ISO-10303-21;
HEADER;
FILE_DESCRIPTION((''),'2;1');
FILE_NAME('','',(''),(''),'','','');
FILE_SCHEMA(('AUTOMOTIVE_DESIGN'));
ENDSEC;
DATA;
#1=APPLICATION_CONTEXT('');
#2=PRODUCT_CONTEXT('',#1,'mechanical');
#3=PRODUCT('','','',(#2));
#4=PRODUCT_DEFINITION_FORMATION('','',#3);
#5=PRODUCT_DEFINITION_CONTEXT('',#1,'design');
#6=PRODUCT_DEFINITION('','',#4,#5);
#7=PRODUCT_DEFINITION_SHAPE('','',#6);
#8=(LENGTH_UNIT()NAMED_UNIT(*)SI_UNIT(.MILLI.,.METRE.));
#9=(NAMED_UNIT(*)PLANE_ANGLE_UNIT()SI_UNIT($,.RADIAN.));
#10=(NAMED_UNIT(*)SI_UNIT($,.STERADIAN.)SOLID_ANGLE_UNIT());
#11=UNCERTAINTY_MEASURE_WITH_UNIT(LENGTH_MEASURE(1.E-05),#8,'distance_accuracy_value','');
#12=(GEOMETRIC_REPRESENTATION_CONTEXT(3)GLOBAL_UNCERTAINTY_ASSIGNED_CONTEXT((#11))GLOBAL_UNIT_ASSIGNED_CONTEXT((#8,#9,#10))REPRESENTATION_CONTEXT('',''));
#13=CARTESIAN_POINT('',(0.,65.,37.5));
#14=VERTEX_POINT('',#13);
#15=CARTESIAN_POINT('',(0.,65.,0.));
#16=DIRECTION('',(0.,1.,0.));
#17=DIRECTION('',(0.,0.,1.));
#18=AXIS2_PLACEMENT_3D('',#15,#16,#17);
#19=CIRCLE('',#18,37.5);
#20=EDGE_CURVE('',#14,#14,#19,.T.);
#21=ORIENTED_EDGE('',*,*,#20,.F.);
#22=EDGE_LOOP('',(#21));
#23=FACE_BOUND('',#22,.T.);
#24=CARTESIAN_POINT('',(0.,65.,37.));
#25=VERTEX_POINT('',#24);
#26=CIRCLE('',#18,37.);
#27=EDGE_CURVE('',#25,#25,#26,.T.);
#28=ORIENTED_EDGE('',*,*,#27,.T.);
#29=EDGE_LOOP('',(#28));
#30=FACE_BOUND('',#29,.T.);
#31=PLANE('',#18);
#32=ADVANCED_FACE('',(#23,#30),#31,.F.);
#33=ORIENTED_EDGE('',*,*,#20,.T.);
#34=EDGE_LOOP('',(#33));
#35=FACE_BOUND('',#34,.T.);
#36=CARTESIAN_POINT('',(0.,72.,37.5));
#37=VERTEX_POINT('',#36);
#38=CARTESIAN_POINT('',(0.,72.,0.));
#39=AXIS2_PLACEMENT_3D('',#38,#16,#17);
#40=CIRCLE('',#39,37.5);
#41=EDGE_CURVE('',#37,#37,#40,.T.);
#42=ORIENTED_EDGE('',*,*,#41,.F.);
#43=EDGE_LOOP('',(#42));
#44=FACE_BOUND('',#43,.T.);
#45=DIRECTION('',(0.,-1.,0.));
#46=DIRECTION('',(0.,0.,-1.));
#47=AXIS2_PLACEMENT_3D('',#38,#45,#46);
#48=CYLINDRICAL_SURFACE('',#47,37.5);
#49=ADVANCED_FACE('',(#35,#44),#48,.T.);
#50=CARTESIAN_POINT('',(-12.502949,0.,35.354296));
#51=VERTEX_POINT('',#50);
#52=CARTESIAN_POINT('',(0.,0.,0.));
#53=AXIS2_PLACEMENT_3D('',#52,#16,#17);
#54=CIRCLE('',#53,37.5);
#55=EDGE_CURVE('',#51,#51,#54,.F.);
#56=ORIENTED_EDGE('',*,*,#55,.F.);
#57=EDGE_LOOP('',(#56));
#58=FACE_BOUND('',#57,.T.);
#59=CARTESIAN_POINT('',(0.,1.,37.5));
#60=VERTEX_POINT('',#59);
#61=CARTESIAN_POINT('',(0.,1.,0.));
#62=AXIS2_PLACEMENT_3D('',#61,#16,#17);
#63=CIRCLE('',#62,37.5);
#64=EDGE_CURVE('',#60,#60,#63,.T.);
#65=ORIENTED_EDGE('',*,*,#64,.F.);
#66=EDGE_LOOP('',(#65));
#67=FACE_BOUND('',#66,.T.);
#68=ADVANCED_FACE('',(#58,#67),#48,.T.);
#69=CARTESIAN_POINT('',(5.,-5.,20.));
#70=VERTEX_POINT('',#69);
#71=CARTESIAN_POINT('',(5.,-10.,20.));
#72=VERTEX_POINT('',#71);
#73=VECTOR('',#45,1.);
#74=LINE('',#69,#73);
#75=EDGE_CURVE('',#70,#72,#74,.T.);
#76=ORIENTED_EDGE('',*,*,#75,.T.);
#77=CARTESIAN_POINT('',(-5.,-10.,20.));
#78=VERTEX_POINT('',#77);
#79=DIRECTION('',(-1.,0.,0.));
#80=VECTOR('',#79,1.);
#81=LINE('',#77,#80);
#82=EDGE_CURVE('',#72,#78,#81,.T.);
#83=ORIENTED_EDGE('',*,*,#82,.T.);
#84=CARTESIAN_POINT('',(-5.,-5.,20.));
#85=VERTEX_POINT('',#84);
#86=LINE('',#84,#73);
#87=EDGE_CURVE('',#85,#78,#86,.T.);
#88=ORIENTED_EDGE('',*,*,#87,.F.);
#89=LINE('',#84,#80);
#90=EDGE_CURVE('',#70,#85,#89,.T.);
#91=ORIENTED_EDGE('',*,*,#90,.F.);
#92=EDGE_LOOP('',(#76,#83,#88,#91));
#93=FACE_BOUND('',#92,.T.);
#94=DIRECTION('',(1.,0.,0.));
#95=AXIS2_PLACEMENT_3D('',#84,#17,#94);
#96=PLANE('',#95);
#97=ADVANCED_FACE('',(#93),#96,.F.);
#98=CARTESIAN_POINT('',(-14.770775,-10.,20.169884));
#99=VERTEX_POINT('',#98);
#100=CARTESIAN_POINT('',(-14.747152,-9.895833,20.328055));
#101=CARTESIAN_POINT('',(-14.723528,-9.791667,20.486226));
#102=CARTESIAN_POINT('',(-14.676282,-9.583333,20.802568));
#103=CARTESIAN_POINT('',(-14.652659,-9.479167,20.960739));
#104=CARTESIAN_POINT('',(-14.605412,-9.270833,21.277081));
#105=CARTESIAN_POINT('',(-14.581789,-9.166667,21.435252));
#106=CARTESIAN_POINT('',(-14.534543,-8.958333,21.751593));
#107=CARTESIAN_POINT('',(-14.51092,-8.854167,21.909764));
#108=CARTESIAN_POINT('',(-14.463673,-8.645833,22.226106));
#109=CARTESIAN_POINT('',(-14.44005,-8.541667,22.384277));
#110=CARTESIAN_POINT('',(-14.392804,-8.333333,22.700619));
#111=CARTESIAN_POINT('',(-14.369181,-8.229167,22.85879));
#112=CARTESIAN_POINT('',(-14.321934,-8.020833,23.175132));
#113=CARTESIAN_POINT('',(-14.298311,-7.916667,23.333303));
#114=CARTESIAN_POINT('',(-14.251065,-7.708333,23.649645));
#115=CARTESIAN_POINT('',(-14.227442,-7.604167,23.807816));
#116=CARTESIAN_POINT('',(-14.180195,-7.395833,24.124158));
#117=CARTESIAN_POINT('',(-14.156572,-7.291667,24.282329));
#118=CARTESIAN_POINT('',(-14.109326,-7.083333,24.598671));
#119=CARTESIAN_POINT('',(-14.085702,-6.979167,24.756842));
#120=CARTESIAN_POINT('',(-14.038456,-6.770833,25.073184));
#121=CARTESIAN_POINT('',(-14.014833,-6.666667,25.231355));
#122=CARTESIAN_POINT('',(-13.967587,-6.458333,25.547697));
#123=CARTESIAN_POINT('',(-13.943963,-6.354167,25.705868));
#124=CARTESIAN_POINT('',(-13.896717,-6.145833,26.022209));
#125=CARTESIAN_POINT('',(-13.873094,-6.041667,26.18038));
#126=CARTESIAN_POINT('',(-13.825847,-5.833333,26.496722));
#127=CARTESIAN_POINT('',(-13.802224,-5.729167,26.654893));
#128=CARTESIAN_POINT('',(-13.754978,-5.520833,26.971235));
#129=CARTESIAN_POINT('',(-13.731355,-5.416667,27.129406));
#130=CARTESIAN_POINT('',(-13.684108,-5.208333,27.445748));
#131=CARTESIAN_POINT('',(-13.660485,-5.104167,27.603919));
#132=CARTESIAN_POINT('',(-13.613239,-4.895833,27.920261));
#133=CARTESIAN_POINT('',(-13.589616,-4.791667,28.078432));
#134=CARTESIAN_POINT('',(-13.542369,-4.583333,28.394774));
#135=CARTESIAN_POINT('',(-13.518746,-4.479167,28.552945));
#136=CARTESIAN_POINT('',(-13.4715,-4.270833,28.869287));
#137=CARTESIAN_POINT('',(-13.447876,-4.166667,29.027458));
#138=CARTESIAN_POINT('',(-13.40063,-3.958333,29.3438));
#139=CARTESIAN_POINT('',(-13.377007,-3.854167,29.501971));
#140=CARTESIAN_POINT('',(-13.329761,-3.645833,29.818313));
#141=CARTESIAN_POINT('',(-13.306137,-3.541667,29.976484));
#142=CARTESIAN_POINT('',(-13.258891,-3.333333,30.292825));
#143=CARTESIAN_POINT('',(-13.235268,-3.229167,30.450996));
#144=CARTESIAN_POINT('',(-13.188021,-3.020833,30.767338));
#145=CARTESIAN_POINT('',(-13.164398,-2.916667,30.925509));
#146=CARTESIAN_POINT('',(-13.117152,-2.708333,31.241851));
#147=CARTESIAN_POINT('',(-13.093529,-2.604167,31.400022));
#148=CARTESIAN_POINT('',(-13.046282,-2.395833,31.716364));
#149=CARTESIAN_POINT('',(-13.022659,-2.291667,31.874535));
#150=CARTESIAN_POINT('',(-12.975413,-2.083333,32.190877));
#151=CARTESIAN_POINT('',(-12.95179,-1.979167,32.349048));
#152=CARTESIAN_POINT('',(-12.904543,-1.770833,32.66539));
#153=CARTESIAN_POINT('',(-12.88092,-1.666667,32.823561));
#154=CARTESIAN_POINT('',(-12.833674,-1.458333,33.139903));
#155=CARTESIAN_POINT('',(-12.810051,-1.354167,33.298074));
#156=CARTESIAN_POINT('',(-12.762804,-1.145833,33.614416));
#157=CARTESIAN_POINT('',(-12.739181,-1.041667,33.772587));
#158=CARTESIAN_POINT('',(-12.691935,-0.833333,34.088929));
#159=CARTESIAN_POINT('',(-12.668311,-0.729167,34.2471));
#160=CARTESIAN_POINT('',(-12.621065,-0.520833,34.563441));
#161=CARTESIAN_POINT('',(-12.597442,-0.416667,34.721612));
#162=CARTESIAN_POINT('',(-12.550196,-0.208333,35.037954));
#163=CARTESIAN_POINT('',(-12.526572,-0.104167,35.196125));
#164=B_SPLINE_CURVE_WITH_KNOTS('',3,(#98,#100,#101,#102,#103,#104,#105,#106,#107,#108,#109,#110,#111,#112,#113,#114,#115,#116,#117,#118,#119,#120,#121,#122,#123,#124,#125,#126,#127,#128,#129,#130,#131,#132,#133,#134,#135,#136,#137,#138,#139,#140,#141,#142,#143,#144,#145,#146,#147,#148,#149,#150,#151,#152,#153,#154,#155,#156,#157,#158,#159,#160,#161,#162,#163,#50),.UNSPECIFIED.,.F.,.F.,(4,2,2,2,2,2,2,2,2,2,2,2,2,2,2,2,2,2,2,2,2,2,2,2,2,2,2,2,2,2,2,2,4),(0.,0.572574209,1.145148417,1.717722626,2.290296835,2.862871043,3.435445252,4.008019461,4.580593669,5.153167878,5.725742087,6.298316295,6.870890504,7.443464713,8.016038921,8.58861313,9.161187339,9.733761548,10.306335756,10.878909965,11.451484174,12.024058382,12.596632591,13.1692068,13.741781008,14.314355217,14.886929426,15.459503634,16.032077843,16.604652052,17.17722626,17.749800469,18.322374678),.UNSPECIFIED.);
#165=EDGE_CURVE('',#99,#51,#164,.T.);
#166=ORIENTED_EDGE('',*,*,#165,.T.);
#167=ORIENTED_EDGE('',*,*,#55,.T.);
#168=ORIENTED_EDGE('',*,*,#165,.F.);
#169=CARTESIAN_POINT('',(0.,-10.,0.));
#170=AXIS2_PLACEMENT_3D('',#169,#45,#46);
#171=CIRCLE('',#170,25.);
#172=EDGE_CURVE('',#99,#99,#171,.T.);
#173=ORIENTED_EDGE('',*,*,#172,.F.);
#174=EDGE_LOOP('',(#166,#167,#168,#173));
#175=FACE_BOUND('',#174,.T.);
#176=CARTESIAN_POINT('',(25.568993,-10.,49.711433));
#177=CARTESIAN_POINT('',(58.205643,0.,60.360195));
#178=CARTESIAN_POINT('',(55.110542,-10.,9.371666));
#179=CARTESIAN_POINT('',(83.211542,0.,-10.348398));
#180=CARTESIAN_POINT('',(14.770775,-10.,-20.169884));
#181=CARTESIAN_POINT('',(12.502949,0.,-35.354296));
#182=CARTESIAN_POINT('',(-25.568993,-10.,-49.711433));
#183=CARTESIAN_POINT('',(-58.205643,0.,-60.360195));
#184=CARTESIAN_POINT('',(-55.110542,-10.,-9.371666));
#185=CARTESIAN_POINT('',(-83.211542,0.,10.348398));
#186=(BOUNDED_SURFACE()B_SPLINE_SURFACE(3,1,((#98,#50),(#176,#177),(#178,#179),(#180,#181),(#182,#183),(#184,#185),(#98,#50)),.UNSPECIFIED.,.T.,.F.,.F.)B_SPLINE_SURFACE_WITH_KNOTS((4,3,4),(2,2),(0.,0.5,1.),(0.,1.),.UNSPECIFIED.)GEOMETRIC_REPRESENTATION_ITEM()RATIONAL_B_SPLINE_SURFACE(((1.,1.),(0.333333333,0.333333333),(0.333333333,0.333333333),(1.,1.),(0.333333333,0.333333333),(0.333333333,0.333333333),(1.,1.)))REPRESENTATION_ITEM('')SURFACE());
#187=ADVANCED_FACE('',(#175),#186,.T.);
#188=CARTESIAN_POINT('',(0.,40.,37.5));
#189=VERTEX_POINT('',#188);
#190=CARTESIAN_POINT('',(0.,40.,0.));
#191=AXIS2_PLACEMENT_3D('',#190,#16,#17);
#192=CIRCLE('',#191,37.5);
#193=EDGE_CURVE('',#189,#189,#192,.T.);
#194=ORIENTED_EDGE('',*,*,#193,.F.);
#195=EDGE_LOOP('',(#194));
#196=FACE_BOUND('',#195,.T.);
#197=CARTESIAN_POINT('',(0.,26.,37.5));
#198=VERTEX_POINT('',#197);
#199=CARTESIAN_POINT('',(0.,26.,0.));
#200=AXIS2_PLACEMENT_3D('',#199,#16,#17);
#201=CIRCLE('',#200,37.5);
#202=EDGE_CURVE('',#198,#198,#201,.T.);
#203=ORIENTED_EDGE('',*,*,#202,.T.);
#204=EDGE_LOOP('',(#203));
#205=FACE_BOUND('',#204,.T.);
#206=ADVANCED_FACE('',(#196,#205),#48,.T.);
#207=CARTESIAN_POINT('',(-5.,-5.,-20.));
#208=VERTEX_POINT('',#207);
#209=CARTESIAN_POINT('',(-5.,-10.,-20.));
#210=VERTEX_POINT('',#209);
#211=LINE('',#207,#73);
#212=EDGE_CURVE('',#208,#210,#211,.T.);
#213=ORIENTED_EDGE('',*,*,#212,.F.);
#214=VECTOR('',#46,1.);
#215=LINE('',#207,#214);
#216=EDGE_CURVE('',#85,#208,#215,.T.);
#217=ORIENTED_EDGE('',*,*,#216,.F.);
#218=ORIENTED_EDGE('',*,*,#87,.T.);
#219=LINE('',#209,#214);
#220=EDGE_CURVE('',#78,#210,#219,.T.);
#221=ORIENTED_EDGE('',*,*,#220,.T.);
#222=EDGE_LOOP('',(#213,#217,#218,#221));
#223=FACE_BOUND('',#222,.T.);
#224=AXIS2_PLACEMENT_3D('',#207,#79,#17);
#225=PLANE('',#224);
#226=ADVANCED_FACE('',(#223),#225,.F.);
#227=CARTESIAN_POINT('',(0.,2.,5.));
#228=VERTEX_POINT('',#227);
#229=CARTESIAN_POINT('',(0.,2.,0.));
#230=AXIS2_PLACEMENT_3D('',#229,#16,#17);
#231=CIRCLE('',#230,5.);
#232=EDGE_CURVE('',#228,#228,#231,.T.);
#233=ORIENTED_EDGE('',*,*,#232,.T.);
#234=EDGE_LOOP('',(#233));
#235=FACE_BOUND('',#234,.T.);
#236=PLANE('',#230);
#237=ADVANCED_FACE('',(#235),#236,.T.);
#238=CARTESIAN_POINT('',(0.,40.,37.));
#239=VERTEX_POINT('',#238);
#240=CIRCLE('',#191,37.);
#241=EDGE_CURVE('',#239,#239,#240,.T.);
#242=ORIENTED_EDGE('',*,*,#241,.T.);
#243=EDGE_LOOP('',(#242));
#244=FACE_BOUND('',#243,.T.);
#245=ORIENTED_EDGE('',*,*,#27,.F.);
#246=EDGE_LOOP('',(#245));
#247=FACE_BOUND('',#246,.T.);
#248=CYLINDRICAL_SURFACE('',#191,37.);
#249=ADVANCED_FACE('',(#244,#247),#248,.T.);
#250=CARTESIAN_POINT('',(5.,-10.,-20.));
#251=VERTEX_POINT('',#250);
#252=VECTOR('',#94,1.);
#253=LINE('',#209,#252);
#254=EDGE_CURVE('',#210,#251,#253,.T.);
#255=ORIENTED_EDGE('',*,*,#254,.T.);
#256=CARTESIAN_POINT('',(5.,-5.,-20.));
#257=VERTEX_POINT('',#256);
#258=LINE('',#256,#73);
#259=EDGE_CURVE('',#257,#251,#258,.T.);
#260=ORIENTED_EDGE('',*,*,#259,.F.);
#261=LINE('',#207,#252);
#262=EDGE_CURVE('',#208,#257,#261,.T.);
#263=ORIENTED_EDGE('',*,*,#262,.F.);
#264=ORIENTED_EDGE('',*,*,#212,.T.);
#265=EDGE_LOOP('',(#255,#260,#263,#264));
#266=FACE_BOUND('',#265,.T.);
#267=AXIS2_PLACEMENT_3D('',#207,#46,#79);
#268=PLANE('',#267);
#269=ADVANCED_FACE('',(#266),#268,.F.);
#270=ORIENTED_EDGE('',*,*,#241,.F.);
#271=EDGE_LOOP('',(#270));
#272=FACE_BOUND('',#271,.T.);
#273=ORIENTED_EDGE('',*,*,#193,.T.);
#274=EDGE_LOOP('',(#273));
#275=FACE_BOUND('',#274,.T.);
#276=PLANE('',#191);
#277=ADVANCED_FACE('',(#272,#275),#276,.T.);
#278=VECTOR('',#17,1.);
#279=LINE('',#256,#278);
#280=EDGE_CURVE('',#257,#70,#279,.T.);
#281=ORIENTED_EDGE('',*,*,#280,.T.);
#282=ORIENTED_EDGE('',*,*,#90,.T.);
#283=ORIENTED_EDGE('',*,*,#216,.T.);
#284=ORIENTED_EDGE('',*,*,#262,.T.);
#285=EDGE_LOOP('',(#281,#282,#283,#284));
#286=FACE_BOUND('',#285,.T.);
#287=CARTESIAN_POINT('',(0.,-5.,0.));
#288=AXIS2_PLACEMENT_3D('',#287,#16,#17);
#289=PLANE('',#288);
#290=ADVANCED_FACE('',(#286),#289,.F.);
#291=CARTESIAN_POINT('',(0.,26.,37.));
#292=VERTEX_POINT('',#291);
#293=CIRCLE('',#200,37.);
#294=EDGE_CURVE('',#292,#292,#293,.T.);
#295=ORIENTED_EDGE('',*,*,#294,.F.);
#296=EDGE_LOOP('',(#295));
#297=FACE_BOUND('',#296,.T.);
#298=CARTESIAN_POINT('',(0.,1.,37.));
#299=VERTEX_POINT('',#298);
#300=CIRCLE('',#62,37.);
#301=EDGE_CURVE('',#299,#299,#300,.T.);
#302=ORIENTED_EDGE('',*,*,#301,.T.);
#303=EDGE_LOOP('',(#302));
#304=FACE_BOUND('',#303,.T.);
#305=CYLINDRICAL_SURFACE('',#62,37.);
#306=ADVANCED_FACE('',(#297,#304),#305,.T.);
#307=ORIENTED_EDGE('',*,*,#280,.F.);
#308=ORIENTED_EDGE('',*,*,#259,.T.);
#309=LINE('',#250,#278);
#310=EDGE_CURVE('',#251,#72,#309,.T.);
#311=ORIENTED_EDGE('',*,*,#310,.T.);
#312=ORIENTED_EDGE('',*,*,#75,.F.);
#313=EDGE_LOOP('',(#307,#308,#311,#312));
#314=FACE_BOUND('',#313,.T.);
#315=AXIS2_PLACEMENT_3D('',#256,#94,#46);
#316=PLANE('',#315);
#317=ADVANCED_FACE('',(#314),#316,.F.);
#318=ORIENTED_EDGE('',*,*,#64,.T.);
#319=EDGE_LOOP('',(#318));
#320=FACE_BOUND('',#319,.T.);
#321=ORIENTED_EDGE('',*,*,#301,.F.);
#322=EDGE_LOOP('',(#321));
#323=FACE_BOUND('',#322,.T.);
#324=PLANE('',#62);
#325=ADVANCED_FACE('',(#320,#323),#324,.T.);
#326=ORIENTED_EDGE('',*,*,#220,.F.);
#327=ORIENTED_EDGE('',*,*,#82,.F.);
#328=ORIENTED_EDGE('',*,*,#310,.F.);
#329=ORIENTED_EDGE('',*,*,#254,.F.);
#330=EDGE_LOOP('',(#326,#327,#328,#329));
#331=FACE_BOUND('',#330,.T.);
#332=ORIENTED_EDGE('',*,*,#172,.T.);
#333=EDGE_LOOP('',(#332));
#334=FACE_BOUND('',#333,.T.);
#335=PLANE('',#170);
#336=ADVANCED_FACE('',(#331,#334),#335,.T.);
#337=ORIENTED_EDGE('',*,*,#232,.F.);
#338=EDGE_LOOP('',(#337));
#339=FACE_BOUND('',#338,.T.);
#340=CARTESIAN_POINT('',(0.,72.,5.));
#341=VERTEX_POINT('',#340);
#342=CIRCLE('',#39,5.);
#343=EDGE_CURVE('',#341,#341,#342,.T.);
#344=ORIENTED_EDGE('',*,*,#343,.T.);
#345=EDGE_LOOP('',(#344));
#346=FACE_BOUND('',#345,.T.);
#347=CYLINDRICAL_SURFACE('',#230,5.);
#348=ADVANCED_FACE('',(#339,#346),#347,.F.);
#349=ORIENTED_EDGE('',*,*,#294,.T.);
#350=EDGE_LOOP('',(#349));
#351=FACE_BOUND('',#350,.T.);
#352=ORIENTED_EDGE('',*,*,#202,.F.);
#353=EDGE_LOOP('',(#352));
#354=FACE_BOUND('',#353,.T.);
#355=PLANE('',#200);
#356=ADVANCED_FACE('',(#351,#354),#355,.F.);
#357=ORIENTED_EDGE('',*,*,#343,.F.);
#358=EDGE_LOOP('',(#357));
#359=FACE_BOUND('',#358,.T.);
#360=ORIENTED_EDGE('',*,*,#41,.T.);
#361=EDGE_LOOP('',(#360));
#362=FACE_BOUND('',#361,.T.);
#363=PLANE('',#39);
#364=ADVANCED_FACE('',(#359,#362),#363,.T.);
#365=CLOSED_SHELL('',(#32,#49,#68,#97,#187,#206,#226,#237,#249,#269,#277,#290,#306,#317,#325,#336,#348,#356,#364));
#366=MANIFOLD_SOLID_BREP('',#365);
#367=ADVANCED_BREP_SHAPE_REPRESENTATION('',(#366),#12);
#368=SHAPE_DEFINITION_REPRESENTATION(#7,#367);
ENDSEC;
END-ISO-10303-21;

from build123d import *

# Parameters (mm, degrees)
SKETCH1_R           = 37.5
BOSS_EXTRUDE1_DEPTH = 72
CUT_EXTRUDE1_START  = -25
SKETCH3_R           = 37.5
SKETCH3_R_2         = 37
CUT_EXTRUDE1_DEPTH  = 25
CUT_EXTRUDE2_START  = -25
SKETCH2_R           = 37.5
SKETCH2_R_2         = 37
CUT_EXTRUDE2_DEPTH  = 25
SKETCH5_R           = 5
CUT_EXTRUDE3_DEPTH  = 70
SKETCH6_W           = 10
SKETCH6_H           = 40
CUT_EXTRUDE4_DEPTH  = 5


with BuildPart() as part:
    # Sketch1 → Boss-Extrude1 (new body)
    with BuildSketch(Plane(origin=(0, 0, 0), x_dir=(1, 0, 0), z_dir=(0, 1, 0))):
        with Locations(Location((0, 0, 0), (0, 0, 270))):
            Circle(SKETCH1_R)
    extrude(amount=BOSS_EXTRUDE1_DEPTH)

    # Sketch3 → Cut-Extrude1 (cut)
    with BuildSketch(Plane(origin=(0, 65, 0), x_dir=(1, 0, 0), z_dir=(0, 1, 0)).offset(CUT_EXTRUDE1_START)):
        with Locations(Location((0, 0, 0), (0, 0, 270))):
            Circle(SKETCH3_R)
        with Locations(Location((0, 0, 0), (0, 0, 270))):
            Circle(SKETCH3_R_2, mode=Mode.SUBTRACT)
    extrude(amount=CUT_EXTRUDE1_DEPTH, mode=Mode.SUBTRACT)

    # Sketch2 → Cut-Extrude2 (cut)
    with BuildSketch(Plane(origin=(0, 26, 0), x_dir=(1, 0, 0), z_dir=(0, 1, 0)).offset(CUT_EXTRUDE2_START)):
        with Locations(Location((0, 0, 0), (0, 0, 270))):
            Circle(SKETCH2_R)
        with Locations(Location((0, 0, 0), (0, 0, 270))):
            Circle(SKETCH2_R_2, mode=Mode.SUBTRACT)
    extrude(amount=CUT_EXTRUDE2_DEPTH, mode=Mode.SUBTRACT)

    # Loft2: read off the stored shape, not the designer's step
    # Loft2: loft between two sections, ruled curve by curve
    loft2_from = [
        Edge.make_bspline([(-14.77077476, -10, 20.169883812), (25.568992863, -10, 49.711433333), (55.110542384, -10, 9.371665709), (14.77077476, -10, -20.169883812), (-25.568992863, -10, -49.711433333), (-55.110542384, -10, -9.371665709), (-14.77077476, -10, 20.169883812)], [0, 0, 0, 0, 0.5, 0.5, 0.5, 1, 1, 1, 1], 3, [1, 0.333333333, 0.333333333, 1, 0.333333333, 0.333333333, 1]),
    ]
    loft2_to = [
        Edge.make_bspline([(-12.502949146, 0, 35.354296241), (58.205643335, 0, 60.360194532), (83.211541627, 0, -10.348397949), (12.502949146, 0, -35.354296241), (-58.205643335, 0, -60.360194532), (-83.211541627, 0, 10.348397949), (-12.502949146, 0, 35.354296241)], [0, 0, 0, 0, 0.5, 0.5, 0.5, 1, 1, 1, 1], 3, [1, 0.333333333, 0.333333333, 1, 0.333333333, 0.333333333, 1]),
    ]
    loft2 = Solid(Shell([*[Face.make_surface_from_curves(loft2_from[k], loft2_to[k]) for k in range(1)], Face(Wire(loft2_from)), Face(Wire(loft2_to))]))
    add(loft2)

    # Sketch5 → Cut-Extrude3 (cut)
    with BuildSketch(Plane(origin=(0, 72, 0), x_dir=(1, 0, 0), z_dir=(0, 1, 0))):
        with Locations(Location((0, 0, 0), (0, 0, 270))):
            Circle(SKETCH5_R)
    extrude(amount=-CUT_EXTRUDE3_DEPTH, mode=Mode.SUBTRACT)

    # Sketch6 → Cut-Extrude4 (cut)
    with BuildSketch(Plane.XZ.offset(10)):
        Rectangle(SKETCH6_W, SKETCH6_H)
    extrude(amount=-CUT_EXTRUDE4_DEPTH, mode=Mode.SUBTRACT)


solid = part.part
